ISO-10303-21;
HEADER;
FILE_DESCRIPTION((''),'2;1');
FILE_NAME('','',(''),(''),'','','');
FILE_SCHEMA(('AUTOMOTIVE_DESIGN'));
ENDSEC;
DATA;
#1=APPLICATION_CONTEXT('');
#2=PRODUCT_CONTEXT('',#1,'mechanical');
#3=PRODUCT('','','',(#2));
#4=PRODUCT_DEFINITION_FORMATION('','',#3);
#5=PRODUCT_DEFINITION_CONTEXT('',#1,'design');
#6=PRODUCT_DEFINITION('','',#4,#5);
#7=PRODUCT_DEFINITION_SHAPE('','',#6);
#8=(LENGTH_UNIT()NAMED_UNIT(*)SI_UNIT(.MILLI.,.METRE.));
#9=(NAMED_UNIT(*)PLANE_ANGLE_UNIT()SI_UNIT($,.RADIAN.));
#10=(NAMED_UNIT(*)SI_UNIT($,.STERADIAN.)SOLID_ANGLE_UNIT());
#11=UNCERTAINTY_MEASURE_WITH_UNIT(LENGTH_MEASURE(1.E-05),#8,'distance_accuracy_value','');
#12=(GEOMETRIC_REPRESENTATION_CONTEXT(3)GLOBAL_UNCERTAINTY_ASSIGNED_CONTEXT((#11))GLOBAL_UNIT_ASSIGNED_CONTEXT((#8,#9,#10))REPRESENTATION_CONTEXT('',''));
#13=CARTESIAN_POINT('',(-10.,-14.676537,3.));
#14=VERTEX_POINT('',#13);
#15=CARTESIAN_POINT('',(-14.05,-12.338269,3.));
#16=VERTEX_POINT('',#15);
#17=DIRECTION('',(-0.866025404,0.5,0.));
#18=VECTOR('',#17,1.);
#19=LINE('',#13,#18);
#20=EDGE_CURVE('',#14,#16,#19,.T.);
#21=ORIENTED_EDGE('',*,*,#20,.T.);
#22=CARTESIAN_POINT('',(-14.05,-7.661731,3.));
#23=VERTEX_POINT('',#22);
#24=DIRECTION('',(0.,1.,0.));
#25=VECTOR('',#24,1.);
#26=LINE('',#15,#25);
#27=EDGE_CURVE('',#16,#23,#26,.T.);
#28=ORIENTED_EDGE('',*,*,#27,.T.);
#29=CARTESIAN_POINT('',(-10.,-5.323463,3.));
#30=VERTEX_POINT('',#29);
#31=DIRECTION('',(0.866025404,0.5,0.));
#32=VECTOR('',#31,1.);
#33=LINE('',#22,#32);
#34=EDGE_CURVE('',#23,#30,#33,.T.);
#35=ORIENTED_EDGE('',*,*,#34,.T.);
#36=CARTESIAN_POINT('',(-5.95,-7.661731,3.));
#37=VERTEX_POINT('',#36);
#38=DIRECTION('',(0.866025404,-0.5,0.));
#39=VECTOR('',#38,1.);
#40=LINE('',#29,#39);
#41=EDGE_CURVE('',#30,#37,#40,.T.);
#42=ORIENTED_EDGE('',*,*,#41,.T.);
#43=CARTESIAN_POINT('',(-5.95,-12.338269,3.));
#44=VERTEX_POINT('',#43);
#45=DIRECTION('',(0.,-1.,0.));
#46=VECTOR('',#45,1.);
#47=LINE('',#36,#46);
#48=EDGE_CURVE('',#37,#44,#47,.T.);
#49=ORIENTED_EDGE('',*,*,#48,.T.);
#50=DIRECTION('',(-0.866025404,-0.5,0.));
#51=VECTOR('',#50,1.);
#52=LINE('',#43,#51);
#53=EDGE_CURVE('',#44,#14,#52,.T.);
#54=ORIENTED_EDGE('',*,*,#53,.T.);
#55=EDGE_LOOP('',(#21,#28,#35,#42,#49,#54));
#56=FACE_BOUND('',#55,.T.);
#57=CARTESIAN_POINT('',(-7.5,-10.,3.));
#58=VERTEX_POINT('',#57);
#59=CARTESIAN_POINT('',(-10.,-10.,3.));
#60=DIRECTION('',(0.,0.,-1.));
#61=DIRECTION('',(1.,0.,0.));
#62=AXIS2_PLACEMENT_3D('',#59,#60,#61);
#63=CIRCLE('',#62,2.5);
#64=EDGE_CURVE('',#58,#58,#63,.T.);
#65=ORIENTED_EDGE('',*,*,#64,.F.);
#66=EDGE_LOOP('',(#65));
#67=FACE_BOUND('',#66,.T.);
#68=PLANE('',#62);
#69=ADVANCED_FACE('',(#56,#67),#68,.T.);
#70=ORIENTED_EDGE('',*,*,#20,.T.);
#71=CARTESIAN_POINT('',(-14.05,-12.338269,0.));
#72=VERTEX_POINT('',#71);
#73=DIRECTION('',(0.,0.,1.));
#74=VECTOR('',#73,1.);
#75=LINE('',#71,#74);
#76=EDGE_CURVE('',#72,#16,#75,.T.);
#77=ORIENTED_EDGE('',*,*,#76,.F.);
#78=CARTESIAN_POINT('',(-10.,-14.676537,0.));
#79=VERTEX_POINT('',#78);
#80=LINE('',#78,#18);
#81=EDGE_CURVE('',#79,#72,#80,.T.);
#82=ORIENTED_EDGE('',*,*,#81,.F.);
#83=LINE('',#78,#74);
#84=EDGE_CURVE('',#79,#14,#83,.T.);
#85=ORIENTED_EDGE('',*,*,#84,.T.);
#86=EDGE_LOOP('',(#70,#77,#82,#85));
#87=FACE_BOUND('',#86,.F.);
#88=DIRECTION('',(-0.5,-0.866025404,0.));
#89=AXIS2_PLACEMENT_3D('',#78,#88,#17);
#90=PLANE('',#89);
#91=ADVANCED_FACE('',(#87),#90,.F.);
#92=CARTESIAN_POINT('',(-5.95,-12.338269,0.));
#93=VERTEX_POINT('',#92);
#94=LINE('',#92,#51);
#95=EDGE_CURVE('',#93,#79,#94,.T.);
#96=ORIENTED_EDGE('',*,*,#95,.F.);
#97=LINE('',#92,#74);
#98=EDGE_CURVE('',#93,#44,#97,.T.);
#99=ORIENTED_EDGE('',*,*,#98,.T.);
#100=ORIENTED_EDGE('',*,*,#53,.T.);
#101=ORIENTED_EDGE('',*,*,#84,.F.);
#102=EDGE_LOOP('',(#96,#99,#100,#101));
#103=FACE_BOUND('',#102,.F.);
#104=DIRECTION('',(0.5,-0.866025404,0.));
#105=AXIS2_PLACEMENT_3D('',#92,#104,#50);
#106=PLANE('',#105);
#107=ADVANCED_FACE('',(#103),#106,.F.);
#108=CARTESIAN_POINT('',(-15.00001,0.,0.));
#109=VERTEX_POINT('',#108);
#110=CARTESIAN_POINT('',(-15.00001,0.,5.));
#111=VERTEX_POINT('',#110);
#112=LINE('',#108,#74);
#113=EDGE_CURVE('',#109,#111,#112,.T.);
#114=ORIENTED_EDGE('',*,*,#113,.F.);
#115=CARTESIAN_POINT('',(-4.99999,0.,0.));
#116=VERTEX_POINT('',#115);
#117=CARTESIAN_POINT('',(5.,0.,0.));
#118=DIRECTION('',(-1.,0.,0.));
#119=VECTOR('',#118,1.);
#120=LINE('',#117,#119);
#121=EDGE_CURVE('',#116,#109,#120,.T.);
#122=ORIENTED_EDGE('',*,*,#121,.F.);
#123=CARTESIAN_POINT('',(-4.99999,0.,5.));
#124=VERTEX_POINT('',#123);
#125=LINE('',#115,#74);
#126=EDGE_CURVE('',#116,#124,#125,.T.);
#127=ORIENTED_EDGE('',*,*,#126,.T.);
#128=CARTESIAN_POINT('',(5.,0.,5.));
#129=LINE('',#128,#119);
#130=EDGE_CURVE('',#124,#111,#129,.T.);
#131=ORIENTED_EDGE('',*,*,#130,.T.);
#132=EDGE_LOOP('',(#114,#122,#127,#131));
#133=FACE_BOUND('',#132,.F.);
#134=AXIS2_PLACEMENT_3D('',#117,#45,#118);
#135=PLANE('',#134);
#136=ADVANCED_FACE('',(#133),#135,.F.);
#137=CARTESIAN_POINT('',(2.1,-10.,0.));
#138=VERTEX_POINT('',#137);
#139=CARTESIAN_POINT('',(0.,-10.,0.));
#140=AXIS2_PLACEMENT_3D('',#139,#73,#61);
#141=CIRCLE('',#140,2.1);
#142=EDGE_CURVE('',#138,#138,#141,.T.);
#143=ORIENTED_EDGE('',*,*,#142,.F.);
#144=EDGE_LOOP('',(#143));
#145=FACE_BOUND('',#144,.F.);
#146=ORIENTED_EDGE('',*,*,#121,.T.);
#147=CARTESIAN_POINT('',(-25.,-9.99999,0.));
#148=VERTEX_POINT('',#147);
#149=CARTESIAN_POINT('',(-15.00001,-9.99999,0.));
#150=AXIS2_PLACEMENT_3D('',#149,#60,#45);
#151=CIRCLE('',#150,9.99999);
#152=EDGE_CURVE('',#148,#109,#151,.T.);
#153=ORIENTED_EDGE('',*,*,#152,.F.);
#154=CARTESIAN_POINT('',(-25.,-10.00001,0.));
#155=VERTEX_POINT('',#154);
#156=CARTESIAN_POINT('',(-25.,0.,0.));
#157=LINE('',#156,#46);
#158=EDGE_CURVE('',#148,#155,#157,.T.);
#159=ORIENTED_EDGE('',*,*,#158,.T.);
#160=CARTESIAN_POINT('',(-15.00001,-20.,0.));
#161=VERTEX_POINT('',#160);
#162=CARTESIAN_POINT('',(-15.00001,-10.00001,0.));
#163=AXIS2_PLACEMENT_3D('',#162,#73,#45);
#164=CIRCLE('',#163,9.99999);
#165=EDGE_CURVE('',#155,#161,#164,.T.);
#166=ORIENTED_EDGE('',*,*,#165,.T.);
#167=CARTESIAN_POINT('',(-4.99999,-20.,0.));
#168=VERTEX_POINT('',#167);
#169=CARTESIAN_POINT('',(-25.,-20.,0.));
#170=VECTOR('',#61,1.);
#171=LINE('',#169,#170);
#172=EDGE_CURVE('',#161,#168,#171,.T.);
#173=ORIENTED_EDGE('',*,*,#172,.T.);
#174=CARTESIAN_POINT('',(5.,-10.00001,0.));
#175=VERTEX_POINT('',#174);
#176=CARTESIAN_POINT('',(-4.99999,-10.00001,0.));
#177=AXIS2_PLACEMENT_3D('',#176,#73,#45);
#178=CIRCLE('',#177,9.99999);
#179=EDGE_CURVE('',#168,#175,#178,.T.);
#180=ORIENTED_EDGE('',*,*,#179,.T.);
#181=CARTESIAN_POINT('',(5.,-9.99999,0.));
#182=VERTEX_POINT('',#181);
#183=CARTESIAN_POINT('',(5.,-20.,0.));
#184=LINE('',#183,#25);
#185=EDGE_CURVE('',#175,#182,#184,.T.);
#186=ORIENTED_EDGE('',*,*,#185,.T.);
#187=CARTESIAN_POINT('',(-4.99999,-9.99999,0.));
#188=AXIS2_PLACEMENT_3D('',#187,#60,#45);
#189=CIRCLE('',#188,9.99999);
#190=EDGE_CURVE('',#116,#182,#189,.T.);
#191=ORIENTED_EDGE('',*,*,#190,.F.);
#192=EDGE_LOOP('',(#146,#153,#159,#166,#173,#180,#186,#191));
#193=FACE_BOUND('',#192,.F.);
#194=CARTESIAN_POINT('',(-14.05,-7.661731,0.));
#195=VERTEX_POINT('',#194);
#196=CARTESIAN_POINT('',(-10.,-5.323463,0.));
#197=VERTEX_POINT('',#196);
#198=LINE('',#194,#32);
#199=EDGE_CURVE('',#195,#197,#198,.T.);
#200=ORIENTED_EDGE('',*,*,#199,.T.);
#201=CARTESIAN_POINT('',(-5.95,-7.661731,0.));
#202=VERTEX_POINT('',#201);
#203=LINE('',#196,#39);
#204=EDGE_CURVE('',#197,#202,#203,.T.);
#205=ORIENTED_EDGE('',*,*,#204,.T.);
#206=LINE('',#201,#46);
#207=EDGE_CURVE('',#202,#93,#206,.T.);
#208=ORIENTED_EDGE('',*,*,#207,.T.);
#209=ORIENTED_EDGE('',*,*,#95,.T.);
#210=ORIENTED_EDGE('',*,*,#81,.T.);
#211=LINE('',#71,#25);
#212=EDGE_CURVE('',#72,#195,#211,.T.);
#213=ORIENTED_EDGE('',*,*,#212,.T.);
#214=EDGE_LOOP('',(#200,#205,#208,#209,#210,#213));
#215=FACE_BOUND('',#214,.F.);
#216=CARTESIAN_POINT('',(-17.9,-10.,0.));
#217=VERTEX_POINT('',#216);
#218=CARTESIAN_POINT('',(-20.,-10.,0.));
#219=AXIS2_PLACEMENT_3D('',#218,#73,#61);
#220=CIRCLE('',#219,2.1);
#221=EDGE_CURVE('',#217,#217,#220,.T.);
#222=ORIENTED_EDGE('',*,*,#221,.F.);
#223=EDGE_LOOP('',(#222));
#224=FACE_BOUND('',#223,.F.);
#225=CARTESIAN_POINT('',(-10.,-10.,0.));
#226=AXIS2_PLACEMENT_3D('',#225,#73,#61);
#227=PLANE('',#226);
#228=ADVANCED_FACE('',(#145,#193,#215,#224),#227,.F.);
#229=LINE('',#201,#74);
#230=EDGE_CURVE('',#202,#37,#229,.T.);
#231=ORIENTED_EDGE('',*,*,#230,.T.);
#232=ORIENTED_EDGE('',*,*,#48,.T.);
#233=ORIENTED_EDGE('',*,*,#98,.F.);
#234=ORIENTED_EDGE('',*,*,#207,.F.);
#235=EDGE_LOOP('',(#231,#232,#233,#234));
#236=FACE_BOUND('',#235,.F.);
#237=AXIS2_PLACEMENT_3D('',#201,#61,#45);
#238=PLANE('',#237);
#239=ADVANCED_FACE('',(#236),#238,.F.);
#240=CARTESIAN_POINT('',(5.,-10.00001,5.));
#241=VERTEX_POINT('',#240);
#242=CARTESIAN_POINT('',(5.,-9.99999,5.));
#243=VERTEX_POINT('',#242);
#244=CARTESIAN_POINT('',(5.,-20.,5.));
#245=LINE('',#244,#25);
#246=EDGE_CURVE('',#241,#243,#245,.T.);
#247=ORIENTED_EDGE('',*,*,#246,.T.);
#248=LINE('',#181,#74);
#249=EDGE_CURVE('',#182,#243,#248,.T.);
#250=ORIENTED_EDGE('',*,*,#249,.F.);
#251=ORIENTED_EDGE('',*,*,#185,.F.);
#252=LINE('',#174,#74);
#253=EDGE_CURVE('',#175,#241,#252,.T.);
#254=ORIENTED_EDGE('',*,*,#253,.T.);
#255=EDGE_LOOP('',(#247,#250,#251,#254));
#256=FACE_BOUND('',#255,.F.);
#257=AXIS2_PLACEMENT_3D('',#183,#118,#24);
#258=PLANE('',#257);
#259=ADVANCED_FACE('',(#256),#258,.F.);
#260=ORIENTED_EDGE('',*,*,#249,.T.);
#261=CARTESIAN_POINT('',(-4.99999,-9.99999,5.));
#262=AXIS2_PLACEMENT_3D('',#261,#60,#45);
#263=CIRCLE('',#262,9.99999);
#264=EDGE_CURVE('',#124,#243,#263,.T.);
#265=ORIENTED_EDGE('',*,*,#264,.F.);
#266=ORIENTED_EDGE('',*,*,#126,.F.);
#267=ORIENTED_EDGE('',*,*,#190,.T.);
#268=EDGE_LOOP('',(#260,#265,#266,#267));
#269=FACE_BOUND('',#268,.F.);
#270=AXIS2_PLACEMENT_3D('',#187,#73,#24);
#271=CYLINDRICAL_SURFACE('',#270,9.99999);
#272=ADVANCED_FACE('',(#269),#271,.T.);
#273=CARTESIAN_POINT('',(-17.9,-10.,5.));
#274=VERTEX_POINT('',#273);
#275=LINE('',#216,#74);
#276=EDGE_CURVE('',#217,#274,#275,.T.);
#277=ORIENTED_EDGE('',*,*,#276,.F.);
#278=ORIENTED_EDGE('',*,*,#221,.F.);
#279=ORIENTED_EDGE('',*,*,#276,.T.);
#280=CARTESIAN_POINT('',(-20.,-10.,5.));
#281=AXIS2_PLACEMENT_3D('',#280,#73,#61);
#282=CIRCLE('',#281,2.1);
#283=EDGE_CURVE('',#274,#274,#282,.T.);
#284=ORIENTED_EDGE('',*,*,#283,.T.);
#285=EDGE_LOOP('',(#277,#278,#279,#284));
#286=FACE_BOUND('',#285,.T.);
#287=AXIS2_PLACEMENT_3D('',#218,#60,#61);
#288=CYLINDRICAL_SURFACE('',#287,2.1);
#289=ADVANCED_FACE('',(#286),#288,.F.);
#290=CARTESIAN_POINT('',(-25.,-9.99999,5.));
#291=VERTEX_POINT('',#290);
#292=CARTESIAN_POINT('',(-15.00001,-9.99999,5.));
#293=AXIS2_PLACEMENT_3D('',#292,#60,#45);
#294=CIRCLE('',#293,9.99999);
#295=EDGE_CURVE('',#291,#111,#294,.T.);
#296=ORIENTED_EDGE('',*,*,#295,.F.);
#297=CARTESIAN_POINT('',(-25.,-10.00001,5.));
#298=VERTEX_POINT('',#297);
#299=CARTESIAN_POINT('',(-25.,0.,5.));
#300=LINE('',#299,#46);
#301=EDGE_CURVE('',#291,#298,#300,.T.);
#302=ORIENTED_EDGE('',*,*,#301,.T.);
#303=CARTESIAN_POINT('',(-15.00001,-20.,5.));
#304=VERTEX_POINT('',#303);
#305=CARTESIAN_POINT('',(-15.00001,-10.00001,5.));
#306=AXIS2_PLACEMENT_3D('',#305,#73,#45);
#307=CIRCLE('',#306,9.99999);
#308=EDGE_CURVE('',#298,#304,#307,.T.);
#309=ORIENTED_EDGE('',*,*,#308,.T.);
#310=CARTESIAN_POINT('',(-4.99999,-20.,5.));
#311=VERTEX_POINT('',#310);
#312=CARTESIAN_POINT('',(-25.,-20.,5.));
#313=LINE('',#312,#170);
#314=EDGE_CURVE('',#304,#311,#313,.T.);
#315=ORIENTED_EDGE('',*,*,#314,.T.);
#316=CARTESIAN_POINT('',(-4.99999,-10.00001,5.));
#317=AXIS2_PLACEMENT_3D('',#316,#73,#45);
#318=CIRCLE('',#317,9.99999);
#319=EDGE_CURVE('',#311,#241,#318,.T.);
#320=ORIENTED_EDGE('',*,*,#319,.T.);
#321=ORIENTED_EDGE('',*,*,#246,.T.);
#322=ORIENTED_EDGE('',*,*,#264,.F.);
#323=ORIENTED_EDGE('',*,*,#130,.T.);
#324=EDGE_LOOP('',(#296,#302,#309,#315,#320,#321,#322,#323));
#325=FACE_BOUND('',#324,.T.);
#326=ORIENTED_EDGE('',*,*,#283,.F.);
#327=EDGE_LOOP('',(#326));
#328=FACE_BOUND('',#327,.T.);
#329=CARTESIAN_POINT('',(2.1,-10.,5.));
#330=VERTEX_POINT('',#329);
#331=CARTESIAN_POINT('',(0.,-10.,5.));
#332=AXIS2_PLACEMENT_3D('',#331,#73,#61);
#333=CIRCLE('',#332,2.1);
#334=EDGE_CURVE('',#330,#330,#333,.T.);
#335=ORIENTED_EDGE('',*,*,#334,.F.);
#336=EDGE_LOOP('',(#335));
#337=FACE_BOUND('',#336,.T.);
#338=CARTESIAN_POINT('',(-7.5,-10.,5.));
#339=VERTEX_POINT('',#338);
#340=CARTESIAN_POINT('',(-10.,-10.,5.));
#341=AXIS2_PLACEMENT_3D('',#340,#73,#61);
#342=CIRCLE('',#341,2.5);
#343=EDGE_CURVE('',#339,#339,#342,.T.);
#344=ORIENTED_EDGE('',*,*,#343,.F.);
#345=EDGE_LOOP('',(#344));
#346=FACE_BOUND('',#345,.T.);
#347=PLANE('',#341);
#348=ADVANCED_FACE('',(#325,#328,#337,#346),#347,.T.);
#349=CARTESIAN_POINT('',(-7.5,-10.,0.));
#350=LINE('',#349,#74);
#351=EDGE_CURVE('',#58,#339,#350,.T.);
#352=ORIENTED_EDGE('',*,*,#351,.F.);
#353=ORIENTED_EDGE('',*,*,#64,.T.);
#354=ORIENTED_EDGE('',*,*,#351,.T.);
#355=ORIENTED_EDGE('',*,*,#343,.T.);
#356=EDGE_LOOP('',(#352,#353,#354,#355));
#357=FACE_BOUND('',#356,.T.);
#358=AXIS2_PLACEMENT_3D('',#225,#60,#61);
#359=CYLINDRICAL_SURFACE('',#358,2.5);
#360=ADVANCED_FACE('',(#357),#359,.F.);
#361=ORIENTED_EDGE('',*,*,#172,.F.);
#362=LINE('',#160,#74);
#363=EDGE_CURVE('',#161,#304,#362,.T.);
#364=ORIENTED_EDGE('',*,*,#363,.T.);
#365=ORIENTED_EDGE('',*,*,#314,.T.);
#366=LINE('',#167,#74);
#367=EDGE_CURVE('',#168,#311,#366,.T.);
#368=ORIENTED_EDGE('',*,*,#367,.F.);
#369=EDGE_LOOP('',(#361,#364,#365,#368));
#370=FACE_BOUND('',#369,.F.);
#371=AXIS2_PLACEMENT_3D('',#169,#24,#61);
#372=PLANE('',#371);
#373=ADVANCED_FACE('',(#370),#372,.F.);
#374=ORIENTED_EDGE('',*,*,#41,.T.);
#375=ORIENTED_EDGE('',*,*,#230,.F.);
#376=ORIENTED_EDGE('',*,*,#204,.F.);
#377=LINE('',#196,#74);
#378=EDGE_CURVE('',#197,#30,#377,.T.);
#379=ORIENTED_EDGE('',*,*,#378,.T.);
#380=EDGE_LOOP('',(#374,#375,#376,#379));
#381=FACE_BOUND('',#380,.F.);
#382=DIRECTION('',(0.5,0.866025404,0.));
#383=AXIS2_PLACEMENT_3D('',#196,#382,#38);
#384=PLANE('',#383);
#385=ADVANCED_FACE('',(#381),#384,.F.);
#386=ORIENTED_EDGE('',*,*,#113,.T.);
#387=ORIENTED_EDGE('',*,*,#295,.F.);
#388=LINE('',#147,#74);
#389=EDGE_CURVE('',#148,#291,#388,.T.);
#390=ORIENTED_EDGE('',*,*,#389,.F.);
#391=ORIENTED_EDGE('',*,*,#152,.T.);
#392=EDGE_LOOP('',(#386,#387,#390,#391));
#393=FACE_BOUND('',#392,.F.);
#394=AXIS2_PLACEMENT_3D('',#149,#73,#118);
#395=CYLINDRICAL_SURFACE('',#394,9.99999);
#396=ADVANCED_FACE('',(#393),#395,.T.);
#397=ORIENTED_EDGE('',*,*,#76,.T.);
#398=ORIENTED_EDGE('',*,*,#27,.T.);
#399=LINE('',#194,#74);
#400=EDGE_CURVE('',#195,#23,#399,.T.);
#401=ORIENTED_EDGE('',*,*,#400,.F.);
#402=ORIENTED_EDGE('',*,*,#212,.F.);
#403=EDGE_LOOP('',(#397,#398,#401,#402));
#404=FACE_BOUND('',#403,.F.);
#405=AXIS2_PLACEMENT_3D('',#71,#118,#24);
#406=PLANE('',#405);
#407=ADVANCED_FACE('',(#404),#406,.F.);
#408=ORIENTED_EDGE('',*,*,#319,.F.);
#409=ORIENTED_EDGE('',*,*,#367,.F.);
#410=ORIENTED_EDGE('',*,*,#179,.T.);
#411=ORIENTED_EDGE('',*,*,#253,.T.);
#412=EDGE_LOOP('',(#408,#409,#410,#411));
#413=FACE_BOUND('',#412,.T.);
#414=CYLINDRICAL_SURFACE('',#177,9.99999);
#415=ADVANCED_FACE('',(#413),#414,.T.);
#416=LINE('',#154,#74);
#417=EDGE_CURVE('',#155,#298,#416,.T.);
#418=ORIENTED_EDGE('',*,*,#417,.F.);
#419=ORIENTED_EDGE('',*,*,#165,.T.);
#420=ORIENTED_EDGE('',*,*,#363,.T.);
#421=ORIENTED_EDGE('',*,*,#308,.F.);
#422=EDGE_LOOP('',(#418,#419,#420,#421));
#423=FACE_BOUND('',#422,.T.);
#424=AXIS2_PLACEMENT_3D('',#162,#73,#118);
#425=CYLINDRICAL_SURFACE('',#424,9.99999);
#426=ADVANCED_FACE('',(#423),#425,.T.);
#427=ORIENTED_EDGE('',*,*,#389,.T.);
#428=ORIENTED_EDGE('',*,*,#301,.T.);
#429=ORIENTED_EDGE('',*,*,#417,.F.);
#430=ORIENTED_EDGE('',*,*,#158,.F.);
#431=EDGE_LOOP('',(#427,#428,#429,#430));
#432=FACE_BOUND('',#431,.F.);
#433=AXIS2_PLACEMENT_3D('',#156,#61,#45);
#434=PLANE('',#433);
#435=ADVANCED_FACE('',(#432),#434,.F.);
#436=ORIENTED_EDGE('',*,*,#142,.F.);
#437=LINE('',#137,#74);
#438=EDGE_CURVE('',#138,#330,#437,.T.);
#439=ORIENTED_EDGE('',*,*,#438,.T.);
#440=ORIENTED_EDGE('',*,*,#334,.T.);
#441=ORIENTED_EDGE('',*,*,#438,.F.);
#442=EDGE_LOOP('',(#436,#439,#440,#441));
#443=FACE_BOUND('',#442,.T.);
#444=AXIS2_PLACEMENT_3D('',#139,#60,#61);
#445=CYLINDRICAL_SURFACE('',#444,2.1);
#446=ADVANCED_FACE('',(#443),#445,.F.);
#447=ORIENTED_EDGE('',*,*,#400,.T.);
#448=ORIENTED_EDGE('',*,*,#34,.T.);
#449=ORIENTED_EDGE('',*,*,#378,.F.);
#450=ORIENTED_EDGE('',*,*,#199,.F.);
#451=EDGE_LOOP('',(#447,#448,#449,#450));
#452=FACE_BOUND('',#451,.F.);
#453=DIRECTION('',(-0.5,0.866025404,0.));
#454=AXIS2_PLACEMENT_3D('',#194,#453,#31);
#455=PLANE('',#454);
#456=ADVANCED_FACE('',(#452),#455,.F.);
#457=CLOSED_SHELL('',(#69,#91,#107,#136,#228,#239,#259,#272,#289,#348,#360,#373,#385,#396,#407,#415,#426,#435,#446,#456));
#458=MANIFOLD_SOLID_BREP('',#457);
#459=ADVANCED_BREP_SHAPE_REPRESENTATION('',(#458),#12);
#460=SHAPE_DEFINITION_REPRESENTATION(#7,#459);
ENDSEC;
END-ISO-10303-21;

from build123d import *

# Parameters (mm, degrees)
F0_R     = 2.1
F0_R_2   = 2.5
F1_DEPTH = 5
F2_R     = 9.99999
F3_R     = 2.5
F4_DEPTH = 3


# Not quite as in the source:
# - a fillet or chamfer is up to 0.001 mm smaller than in the source, because OpenCascade refuses the exact size


with BuildPart() as f1:
    # F0 (on Top) → F1 (new body)
    with BuildSketch(Plane.XY):
        Polygon((0, 0), (-20, 0), (-25, 0), (-25, -20), (-20, -20), (0, -20), (5, -20), (5, 0), align=None)
        with Locations((-20, -10)):
            Circle(F0_R, mode=Mode.SUBTRACT)
        with Locations((-10, -10)):
            Circle(F0_R_2, mode=Mode.SUBTRACT)
        with Locations((0, -10)):
            Circle(F0_R, mode=Mode.SUBTRACT)
    extrude(amount=F1_DEPTH)

    # F2 (radius 10 in the source; OpenCascade refuses exactly that, so slightly less here)
    f2_edges = [f1.edges().sort_by_distance(p)[0] for p in [
        (-25, -20, 2.5),
        (5, -20, 2.5),
        (5, 0, 2.5),
        (-25, 0, 2.5),
    ]]
    fillet(f2_edges, radius=F2_R)

    # F3 (on face) → F4 (cut)
    with BuildSketch(Plane(origin=(0, 0, 0), x_dir=(1, 0, 0), z_dir=(0, 0, -1))):
        Polygon((-14.05, 12.3382685902), (-14.05, 7.6617314098), (-10, 5.3234628196), (-5.95, 7.6617314098), (-5.95, 12.3382685902), (-10, 14.6765371804), align=None)
        with Locations((-10, 10)):
            Circle(F3_R, mode=Mode.SUBTRACT)
        with Locations((-10, 10)):
            Circle(F3_R)
    extrude(amount=-F4_DEPTH, mode=Mode.SUBTRACT)


solid = f1.part
